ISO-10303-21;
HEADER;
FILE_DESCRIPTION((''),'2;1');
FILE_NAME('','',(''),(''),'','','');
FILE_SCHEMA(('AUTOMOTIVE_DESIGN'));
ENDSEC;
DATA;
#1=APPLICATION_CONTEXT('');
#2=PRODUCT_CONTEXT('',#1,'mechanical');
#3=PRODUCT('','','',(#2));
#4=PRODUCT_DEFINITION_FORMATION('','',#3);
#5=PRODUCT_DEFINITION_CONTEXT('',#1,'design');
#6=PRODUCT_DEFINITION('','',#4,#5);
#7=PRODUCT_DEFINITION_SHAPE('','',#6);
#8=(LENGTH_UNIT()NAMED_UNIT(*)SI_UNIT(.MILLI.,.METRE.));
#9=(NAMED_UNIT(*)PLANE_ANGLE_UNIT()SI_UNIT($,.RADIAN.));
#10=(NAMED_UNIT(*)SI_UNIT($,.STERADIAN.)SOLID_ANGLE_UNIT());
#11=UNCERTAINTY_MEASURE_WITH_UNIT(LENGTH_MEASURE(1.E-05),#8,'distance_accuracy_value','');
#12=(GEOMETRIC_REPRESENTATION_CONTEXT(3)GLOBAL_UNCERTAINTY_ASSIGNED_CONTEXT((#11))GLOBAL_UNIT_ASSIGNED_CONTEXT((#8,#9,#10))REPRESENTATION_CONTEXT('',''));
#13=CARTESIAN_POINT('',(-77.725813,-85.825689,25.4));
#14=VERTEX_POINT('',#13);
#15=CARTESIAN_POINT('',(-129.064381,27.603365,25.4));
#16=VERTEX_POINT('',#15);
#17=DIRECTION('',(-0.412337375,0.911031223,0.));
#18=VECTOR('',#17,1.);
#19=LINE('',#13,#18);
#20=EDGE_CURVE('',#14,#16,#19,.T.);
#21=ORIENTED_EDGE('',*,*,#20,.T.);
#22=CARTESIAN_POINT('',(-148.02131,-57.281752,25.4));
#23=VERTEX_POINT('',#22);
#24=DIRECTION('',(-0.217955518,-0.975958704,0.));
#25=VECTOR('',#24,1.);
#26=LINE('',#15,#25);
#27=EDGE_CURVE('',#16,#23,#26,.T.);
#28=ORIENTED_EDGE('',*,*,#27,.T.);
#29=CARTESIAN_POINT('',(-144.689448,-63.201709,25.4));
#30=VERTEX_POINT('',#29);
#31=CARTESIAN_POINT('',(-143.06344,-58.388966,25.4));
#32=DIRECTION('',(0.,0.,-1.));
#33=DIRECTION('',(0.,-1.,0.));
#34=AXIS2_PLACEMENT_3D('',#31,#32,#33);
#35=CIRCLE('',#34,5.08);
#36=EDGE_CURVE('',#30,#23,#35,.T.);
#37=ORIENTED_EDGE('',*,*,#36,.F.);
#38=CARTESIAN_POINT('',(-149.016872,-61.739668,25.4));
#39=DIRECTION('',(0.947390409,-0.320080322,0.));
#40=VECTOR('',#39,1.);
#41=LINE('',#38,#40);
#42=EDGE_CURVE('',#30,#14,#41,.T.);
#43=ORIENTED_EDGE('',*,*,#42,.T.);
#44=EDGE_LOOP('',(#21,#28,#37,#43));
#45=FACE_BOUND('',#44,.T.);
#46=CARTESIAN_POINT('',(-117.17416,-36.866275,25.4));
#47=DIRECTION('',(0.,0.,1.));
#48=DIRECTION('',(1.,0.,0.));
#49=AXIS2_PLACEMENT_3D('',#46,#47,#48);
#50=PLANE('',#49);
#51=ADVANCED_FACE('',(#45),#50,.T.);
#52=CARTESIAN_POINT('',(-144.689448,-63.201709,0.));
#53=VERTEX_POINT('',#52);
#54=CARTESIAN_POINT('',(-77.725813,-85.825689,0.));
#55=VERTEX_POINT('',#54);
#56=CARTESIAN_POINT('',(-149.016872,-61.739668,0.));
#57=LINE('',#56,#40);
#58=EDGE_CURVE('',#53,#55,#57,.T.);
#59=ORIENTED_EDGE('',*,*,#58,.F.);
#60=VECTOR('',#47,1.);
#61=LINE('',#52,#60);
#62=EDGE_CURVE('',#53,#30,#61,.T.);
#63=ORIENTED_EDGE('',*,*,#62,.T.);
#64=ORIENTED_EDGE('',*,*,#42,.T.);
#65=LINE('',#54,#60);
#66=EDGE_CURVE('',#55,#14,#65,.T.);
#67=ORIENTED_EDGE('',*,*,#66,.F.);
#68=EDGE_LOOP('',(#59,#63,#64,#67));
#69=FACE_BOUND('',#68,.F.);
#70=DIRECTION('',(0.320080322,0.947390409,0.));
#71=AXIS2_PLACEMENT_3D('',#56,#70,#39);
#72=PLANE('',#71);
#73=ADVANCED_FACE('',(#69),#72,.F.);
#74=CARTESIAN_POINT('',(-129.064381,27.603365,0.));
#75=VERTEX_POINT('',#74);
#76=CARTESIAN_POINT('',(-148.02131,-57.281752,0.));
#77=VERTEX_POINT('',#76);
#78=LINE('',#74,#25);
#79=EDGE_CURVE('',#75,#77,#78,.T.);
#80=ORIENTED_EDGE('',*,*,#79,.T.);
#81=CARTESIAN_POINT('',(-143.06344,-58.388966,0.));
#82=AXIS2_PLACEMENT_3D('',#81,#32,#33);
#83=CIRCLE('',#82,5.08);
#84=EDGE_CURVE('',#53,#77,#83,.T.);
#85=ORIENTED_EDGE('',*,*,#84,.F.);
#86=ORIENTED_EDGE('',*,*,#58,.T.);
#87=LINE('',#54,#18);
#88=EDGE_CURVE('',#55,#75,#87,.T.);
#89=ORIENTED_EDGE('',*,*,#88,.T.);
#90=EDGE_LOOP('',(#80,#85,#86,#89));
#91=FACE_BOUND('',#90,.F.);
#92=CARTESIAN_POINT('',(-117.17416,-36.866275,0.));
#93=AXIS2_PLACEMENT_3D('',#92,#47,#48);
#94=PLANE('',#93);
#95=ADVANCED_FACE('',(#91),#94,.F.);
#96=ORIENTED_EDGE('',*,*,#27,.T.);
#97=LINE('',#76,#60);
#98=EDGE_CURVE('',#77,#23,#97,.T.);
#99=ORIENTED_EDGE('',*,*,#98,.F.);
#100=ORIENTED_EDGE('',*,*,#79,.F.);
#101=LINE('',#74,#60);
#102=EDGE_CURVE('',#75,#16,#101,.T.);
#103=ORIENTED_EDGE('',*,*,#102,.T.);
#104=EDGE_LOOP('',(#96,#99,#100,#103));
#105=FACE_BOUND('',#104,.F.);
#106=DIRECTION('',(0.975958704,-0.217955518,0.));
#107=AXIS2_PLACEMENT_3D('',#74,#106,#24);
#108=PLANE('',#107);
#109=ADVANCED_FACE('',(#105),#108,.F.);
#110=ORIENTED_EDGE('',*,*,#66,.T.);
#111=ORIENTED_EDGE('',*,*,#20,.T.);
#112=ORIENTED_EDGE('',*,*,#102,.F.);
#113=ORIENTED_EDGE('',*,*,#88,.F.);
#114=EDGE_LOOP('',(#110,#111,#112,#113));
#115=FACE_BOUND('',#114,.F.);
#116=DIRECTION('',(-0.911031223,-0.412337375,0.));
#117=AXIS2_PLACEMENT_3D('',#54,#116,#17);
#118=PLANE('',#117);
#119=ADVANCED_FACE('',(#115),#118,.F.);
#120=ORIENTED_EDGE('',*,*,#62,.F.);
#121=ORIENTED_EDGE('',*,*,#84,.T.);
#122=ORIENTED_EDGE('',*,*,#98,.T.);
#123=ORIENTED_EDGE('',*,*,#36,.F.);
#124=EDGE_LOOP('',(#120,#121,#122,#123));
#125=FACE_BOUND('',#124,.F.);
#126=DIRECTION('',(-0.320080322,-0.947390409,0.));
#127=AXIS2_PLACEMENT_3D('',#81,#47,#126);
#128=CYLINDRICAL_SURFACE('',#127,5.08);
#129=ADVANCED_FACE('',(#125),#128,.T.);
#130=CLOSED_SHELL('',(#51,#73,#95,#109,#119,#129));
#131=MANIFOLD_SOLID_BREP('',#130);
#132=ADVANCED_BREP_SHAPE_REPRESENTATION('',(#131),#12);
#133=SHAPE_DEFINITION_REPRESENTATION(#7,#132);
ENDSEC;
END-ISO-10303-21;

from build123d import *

# Parameters (mm, degrees)
F1_DEPTH = 25.4
F3_R     = 5.08


# Not quite as in the source:
# - a feature of the source that left no trace in its solid (it failed there, or was rolled back) is left out


with BuildPart() as f1:
    # F0 (on Top) → F1 (new body)
    with BuildSketch(Plane.XY):
        Polygon((-149.0168720484, -61.7396682501), (-77.7258127928, -85.825689137), (-129.0643811226, 27.6033654809), align=None)
    extrude(amount=F1_DEPTH)

    # F3
    f3_edges = [f1.edges().sort_by_distance(p)[0] for p in [
        (-149.016872, -61.739668, 12.7),
    ]]
    fillet(f3_edges, radius=F3_R)


solid = f1.part
